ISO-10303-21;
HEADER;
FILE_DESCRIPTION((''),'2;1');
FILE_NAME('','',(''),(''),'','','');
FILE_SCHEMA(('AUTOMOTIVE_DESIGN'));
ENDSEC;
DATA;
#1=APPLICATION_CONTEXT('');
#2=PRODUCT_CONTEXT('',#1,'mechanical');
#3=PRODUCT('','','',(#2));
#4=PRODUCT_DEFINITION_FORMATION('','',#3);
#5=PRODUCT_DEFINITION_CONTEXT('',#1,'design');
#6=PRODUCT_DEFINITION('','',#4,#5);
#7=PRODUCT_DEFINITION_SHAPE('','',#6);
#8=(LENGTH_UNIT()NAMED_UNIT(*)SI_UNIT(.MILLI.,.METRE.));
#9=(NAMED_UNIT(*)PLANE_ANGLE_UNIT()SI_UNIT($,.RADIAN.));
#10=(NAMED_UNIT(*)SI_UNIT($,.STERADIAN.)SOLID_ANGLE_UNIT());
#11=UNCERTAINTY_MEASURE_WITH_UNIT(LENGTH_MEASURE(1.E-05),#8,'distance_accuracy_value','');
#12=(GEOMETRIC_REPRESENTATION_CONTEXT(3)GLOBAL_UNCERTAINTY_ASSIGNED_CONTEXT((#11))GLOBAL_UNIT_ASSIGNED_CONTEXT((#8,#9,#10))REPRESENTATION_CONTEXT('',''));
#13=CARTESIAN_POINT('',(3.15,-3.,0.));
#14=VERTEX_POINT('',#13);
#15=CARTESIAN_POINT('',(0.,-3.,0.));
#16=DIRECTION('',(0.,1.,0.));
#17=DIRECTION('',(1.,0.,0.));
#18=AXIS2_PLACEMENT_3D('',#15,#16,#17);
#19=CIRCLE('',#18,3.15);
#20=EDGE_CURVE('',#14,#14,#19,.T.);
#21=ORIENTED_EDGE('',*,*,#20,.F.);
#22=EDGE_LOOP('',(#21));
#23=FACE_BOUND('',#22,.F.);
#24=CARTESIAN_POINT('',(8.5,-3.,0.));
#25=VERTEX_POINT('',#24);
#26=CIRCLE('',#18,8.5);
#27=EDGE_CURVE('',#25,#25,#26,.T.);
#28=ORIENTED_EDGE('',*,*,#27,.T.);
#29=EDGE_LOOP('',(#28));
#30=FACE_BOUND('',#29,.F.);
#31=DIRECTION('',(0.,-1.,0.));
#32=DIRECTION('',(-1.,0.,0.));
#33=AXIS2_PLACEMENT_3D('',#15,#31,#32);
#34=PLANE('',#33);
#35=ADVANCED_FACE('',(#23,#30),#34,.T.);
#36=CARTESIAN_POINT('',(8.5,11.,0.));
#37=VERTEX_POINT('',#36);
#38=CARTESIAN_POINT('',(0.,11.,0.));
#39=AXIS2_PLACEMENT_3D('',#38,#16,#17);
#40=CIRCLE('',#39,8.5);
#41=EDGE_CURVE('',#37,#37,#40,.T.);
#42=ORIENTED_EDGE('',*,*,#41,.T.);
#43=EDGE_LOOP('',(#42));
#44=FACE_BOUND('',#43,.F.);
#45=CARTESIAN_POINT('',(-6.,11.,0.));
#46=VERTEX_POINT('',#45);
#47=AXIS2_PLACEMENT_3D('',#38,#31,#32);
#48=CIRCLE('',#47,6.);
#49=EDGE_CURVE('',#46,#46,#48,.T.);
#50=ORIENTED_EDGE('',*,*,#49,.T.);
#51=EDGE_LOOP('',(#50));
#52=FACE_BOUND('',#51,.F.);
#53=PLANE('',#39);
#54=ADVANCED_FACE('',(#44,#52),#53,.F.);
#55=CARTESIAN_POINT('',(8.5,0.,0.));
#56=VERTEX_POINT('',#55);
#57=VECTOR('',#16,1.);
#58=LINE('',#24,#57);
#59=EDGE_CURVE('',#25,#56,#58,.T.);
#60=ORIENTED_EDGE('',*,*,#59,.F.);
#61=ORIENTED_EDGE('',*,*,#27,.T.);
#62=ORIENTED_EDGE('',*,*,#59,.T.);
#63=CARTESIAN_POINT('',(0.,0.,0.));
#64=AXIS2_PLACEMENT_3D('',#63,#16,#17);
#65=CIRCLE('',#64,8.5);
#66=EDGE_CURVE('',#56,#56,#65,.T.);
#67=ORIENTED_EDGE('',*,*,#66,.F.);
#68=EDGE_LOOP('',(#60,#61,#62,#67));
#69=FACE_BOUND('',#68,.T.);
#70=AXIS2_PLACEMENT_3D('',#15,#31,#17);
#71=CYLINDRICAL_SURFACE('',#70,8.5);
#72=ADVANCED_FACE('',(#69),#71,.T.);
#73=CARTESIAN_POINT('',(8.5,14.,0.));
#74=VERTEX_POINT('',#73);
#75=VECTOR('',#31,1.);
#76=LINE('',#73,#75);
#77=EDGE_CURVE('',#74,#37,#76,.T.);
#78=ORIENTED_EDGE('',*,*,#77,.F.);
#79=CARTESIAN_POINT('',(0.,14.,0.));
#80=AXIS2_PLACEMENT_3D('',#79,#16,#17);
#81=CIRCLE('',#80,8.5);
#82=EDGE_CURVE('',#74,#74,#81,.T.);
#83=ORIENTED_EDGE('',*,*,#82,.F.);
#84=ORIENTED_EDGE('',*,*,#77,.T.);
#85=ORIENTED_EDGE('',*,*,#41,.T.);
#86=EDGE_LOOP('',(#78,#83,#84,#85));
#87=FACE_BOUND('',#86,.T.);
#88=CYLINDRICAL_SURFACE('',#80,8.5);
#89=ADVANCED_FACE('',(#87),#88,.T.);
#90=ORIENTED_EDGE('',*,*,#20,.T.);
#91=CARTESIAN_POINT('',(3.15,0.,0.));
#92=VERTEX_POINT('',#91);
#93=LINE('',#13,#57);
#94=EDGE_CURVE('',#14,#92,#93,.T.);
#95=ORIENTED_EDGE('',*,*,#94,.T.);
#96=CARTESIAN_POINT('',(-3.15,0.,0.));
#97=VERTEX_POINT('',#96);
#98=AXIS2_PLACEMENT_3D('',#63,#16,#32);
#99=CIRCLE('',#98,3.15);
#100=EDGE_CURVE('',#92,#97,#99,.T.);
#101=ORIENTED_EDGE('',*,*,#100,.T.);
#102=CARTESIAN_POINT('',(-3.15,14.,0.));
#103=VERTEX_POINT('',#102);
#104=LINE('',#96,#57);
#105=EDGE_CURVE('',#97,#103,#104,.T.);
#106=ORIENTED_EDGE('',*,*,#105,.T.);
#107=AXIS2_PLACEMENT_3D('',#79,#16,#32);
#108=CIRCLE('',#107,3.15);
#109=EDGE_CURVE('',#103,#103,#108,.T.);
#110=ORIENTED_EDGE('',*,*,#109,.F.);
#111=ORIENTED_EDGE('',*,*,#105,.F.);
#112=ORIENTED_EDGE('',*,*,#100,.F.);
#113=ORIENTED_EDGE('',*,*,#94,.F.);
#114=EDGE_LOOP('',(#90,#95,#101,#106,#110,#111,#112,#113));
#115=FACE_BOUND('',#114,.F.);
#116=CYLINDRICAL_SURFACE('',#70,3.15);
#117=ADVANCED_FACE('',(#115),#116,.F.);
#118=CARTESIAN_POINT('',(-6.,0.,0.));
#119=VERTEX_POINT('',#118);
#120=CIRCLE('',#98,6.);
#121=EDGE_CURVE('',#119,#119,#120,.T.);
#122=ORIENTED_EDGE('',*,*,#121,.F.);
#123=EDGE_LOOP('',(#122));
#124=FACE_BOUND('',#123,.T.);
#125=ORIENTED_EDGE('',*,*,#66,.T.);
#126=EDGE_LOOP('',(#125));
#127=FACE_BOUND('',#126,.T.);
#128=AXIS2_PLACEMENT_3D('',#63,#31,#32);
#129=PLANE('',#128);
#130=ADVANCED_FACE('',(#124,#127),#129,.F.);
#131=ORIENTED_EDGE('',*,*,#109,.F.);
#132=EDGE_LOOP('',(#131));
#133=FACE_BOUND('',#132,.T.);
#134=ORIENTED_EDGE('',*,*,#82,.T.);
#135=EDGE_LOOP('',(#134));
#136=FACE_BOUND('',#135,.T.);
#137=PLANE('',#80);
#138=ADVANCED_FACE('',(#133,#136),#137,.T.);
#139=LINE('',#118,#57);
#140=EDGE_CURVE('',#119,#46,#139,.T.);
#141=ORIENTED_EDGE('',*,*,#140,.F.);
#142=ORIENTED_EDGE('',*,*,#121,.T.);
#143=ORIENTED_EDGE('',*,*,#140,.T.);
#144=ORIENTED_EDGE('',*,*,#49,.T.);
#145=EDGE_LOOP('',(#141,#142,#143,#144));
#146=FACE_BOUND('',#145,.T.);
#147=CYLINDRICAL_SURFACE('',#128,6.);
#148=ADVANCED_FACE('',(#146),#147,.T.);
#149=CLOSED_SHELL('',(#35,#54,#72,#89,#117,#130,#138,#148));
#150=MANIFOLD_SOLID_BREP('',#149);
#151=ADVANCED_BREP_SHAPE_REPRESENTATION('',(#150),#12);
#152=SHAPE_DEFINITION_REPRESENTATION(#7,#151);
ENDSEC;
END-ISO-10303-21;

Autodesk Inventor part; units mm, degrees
ref_plane "YZ Plane" through (0, 0, 0) normal (1, 0, 0) x (0, 1, 0)
ref_plane "XZ Plane" through (0, 0, 0) normal (0, 1, 0) x (-1, 0, 0)
ref_plane "XY Plane" through (0, 0, 0) normal (0, 0, 1) x (1, 0, 0)
sketch "Sketch1" plane through (0, 0, 0) normal (0, 1, 0) x (-1, 0, 0)
  circle A0 centre (0, 0) radius 3.15
  circle A1 centre (0, 0) radius 6
  dimension "d0" = 6.3
  dimension "d2" = 12
extrude "Extrusion1" add sketch "Sketch1" along normal blind 14
sketch "Sketch2" plane through (0, 14, 0) normal (0, 1, 0) x (1, 0, 0)
  circle A0 centre (0, 0) radius 2.6288
  circle A1 centre (0, 0) radius 3.15 projected
  circle A2 centre (0, 0) radius 8.5
  dimension "d5" = 17
extrude "Extrusion2" add sketch "Sketch2" against normal blind 3 contours A2
ref_plane "Work Plane1" through (0, 5.5, 0) normal (0, -1, 0) x (1, 0, 0)
mirror "Mirror1" about plane through (0, 5.5, 0) normal (0, -1, 0) of "Extrusion2"
ref_plane "Work Plane2" through (0, 5.5, 0) normal (0, -1, 0) x (1, 0, 0)
properties part number "Belt tensor2"
